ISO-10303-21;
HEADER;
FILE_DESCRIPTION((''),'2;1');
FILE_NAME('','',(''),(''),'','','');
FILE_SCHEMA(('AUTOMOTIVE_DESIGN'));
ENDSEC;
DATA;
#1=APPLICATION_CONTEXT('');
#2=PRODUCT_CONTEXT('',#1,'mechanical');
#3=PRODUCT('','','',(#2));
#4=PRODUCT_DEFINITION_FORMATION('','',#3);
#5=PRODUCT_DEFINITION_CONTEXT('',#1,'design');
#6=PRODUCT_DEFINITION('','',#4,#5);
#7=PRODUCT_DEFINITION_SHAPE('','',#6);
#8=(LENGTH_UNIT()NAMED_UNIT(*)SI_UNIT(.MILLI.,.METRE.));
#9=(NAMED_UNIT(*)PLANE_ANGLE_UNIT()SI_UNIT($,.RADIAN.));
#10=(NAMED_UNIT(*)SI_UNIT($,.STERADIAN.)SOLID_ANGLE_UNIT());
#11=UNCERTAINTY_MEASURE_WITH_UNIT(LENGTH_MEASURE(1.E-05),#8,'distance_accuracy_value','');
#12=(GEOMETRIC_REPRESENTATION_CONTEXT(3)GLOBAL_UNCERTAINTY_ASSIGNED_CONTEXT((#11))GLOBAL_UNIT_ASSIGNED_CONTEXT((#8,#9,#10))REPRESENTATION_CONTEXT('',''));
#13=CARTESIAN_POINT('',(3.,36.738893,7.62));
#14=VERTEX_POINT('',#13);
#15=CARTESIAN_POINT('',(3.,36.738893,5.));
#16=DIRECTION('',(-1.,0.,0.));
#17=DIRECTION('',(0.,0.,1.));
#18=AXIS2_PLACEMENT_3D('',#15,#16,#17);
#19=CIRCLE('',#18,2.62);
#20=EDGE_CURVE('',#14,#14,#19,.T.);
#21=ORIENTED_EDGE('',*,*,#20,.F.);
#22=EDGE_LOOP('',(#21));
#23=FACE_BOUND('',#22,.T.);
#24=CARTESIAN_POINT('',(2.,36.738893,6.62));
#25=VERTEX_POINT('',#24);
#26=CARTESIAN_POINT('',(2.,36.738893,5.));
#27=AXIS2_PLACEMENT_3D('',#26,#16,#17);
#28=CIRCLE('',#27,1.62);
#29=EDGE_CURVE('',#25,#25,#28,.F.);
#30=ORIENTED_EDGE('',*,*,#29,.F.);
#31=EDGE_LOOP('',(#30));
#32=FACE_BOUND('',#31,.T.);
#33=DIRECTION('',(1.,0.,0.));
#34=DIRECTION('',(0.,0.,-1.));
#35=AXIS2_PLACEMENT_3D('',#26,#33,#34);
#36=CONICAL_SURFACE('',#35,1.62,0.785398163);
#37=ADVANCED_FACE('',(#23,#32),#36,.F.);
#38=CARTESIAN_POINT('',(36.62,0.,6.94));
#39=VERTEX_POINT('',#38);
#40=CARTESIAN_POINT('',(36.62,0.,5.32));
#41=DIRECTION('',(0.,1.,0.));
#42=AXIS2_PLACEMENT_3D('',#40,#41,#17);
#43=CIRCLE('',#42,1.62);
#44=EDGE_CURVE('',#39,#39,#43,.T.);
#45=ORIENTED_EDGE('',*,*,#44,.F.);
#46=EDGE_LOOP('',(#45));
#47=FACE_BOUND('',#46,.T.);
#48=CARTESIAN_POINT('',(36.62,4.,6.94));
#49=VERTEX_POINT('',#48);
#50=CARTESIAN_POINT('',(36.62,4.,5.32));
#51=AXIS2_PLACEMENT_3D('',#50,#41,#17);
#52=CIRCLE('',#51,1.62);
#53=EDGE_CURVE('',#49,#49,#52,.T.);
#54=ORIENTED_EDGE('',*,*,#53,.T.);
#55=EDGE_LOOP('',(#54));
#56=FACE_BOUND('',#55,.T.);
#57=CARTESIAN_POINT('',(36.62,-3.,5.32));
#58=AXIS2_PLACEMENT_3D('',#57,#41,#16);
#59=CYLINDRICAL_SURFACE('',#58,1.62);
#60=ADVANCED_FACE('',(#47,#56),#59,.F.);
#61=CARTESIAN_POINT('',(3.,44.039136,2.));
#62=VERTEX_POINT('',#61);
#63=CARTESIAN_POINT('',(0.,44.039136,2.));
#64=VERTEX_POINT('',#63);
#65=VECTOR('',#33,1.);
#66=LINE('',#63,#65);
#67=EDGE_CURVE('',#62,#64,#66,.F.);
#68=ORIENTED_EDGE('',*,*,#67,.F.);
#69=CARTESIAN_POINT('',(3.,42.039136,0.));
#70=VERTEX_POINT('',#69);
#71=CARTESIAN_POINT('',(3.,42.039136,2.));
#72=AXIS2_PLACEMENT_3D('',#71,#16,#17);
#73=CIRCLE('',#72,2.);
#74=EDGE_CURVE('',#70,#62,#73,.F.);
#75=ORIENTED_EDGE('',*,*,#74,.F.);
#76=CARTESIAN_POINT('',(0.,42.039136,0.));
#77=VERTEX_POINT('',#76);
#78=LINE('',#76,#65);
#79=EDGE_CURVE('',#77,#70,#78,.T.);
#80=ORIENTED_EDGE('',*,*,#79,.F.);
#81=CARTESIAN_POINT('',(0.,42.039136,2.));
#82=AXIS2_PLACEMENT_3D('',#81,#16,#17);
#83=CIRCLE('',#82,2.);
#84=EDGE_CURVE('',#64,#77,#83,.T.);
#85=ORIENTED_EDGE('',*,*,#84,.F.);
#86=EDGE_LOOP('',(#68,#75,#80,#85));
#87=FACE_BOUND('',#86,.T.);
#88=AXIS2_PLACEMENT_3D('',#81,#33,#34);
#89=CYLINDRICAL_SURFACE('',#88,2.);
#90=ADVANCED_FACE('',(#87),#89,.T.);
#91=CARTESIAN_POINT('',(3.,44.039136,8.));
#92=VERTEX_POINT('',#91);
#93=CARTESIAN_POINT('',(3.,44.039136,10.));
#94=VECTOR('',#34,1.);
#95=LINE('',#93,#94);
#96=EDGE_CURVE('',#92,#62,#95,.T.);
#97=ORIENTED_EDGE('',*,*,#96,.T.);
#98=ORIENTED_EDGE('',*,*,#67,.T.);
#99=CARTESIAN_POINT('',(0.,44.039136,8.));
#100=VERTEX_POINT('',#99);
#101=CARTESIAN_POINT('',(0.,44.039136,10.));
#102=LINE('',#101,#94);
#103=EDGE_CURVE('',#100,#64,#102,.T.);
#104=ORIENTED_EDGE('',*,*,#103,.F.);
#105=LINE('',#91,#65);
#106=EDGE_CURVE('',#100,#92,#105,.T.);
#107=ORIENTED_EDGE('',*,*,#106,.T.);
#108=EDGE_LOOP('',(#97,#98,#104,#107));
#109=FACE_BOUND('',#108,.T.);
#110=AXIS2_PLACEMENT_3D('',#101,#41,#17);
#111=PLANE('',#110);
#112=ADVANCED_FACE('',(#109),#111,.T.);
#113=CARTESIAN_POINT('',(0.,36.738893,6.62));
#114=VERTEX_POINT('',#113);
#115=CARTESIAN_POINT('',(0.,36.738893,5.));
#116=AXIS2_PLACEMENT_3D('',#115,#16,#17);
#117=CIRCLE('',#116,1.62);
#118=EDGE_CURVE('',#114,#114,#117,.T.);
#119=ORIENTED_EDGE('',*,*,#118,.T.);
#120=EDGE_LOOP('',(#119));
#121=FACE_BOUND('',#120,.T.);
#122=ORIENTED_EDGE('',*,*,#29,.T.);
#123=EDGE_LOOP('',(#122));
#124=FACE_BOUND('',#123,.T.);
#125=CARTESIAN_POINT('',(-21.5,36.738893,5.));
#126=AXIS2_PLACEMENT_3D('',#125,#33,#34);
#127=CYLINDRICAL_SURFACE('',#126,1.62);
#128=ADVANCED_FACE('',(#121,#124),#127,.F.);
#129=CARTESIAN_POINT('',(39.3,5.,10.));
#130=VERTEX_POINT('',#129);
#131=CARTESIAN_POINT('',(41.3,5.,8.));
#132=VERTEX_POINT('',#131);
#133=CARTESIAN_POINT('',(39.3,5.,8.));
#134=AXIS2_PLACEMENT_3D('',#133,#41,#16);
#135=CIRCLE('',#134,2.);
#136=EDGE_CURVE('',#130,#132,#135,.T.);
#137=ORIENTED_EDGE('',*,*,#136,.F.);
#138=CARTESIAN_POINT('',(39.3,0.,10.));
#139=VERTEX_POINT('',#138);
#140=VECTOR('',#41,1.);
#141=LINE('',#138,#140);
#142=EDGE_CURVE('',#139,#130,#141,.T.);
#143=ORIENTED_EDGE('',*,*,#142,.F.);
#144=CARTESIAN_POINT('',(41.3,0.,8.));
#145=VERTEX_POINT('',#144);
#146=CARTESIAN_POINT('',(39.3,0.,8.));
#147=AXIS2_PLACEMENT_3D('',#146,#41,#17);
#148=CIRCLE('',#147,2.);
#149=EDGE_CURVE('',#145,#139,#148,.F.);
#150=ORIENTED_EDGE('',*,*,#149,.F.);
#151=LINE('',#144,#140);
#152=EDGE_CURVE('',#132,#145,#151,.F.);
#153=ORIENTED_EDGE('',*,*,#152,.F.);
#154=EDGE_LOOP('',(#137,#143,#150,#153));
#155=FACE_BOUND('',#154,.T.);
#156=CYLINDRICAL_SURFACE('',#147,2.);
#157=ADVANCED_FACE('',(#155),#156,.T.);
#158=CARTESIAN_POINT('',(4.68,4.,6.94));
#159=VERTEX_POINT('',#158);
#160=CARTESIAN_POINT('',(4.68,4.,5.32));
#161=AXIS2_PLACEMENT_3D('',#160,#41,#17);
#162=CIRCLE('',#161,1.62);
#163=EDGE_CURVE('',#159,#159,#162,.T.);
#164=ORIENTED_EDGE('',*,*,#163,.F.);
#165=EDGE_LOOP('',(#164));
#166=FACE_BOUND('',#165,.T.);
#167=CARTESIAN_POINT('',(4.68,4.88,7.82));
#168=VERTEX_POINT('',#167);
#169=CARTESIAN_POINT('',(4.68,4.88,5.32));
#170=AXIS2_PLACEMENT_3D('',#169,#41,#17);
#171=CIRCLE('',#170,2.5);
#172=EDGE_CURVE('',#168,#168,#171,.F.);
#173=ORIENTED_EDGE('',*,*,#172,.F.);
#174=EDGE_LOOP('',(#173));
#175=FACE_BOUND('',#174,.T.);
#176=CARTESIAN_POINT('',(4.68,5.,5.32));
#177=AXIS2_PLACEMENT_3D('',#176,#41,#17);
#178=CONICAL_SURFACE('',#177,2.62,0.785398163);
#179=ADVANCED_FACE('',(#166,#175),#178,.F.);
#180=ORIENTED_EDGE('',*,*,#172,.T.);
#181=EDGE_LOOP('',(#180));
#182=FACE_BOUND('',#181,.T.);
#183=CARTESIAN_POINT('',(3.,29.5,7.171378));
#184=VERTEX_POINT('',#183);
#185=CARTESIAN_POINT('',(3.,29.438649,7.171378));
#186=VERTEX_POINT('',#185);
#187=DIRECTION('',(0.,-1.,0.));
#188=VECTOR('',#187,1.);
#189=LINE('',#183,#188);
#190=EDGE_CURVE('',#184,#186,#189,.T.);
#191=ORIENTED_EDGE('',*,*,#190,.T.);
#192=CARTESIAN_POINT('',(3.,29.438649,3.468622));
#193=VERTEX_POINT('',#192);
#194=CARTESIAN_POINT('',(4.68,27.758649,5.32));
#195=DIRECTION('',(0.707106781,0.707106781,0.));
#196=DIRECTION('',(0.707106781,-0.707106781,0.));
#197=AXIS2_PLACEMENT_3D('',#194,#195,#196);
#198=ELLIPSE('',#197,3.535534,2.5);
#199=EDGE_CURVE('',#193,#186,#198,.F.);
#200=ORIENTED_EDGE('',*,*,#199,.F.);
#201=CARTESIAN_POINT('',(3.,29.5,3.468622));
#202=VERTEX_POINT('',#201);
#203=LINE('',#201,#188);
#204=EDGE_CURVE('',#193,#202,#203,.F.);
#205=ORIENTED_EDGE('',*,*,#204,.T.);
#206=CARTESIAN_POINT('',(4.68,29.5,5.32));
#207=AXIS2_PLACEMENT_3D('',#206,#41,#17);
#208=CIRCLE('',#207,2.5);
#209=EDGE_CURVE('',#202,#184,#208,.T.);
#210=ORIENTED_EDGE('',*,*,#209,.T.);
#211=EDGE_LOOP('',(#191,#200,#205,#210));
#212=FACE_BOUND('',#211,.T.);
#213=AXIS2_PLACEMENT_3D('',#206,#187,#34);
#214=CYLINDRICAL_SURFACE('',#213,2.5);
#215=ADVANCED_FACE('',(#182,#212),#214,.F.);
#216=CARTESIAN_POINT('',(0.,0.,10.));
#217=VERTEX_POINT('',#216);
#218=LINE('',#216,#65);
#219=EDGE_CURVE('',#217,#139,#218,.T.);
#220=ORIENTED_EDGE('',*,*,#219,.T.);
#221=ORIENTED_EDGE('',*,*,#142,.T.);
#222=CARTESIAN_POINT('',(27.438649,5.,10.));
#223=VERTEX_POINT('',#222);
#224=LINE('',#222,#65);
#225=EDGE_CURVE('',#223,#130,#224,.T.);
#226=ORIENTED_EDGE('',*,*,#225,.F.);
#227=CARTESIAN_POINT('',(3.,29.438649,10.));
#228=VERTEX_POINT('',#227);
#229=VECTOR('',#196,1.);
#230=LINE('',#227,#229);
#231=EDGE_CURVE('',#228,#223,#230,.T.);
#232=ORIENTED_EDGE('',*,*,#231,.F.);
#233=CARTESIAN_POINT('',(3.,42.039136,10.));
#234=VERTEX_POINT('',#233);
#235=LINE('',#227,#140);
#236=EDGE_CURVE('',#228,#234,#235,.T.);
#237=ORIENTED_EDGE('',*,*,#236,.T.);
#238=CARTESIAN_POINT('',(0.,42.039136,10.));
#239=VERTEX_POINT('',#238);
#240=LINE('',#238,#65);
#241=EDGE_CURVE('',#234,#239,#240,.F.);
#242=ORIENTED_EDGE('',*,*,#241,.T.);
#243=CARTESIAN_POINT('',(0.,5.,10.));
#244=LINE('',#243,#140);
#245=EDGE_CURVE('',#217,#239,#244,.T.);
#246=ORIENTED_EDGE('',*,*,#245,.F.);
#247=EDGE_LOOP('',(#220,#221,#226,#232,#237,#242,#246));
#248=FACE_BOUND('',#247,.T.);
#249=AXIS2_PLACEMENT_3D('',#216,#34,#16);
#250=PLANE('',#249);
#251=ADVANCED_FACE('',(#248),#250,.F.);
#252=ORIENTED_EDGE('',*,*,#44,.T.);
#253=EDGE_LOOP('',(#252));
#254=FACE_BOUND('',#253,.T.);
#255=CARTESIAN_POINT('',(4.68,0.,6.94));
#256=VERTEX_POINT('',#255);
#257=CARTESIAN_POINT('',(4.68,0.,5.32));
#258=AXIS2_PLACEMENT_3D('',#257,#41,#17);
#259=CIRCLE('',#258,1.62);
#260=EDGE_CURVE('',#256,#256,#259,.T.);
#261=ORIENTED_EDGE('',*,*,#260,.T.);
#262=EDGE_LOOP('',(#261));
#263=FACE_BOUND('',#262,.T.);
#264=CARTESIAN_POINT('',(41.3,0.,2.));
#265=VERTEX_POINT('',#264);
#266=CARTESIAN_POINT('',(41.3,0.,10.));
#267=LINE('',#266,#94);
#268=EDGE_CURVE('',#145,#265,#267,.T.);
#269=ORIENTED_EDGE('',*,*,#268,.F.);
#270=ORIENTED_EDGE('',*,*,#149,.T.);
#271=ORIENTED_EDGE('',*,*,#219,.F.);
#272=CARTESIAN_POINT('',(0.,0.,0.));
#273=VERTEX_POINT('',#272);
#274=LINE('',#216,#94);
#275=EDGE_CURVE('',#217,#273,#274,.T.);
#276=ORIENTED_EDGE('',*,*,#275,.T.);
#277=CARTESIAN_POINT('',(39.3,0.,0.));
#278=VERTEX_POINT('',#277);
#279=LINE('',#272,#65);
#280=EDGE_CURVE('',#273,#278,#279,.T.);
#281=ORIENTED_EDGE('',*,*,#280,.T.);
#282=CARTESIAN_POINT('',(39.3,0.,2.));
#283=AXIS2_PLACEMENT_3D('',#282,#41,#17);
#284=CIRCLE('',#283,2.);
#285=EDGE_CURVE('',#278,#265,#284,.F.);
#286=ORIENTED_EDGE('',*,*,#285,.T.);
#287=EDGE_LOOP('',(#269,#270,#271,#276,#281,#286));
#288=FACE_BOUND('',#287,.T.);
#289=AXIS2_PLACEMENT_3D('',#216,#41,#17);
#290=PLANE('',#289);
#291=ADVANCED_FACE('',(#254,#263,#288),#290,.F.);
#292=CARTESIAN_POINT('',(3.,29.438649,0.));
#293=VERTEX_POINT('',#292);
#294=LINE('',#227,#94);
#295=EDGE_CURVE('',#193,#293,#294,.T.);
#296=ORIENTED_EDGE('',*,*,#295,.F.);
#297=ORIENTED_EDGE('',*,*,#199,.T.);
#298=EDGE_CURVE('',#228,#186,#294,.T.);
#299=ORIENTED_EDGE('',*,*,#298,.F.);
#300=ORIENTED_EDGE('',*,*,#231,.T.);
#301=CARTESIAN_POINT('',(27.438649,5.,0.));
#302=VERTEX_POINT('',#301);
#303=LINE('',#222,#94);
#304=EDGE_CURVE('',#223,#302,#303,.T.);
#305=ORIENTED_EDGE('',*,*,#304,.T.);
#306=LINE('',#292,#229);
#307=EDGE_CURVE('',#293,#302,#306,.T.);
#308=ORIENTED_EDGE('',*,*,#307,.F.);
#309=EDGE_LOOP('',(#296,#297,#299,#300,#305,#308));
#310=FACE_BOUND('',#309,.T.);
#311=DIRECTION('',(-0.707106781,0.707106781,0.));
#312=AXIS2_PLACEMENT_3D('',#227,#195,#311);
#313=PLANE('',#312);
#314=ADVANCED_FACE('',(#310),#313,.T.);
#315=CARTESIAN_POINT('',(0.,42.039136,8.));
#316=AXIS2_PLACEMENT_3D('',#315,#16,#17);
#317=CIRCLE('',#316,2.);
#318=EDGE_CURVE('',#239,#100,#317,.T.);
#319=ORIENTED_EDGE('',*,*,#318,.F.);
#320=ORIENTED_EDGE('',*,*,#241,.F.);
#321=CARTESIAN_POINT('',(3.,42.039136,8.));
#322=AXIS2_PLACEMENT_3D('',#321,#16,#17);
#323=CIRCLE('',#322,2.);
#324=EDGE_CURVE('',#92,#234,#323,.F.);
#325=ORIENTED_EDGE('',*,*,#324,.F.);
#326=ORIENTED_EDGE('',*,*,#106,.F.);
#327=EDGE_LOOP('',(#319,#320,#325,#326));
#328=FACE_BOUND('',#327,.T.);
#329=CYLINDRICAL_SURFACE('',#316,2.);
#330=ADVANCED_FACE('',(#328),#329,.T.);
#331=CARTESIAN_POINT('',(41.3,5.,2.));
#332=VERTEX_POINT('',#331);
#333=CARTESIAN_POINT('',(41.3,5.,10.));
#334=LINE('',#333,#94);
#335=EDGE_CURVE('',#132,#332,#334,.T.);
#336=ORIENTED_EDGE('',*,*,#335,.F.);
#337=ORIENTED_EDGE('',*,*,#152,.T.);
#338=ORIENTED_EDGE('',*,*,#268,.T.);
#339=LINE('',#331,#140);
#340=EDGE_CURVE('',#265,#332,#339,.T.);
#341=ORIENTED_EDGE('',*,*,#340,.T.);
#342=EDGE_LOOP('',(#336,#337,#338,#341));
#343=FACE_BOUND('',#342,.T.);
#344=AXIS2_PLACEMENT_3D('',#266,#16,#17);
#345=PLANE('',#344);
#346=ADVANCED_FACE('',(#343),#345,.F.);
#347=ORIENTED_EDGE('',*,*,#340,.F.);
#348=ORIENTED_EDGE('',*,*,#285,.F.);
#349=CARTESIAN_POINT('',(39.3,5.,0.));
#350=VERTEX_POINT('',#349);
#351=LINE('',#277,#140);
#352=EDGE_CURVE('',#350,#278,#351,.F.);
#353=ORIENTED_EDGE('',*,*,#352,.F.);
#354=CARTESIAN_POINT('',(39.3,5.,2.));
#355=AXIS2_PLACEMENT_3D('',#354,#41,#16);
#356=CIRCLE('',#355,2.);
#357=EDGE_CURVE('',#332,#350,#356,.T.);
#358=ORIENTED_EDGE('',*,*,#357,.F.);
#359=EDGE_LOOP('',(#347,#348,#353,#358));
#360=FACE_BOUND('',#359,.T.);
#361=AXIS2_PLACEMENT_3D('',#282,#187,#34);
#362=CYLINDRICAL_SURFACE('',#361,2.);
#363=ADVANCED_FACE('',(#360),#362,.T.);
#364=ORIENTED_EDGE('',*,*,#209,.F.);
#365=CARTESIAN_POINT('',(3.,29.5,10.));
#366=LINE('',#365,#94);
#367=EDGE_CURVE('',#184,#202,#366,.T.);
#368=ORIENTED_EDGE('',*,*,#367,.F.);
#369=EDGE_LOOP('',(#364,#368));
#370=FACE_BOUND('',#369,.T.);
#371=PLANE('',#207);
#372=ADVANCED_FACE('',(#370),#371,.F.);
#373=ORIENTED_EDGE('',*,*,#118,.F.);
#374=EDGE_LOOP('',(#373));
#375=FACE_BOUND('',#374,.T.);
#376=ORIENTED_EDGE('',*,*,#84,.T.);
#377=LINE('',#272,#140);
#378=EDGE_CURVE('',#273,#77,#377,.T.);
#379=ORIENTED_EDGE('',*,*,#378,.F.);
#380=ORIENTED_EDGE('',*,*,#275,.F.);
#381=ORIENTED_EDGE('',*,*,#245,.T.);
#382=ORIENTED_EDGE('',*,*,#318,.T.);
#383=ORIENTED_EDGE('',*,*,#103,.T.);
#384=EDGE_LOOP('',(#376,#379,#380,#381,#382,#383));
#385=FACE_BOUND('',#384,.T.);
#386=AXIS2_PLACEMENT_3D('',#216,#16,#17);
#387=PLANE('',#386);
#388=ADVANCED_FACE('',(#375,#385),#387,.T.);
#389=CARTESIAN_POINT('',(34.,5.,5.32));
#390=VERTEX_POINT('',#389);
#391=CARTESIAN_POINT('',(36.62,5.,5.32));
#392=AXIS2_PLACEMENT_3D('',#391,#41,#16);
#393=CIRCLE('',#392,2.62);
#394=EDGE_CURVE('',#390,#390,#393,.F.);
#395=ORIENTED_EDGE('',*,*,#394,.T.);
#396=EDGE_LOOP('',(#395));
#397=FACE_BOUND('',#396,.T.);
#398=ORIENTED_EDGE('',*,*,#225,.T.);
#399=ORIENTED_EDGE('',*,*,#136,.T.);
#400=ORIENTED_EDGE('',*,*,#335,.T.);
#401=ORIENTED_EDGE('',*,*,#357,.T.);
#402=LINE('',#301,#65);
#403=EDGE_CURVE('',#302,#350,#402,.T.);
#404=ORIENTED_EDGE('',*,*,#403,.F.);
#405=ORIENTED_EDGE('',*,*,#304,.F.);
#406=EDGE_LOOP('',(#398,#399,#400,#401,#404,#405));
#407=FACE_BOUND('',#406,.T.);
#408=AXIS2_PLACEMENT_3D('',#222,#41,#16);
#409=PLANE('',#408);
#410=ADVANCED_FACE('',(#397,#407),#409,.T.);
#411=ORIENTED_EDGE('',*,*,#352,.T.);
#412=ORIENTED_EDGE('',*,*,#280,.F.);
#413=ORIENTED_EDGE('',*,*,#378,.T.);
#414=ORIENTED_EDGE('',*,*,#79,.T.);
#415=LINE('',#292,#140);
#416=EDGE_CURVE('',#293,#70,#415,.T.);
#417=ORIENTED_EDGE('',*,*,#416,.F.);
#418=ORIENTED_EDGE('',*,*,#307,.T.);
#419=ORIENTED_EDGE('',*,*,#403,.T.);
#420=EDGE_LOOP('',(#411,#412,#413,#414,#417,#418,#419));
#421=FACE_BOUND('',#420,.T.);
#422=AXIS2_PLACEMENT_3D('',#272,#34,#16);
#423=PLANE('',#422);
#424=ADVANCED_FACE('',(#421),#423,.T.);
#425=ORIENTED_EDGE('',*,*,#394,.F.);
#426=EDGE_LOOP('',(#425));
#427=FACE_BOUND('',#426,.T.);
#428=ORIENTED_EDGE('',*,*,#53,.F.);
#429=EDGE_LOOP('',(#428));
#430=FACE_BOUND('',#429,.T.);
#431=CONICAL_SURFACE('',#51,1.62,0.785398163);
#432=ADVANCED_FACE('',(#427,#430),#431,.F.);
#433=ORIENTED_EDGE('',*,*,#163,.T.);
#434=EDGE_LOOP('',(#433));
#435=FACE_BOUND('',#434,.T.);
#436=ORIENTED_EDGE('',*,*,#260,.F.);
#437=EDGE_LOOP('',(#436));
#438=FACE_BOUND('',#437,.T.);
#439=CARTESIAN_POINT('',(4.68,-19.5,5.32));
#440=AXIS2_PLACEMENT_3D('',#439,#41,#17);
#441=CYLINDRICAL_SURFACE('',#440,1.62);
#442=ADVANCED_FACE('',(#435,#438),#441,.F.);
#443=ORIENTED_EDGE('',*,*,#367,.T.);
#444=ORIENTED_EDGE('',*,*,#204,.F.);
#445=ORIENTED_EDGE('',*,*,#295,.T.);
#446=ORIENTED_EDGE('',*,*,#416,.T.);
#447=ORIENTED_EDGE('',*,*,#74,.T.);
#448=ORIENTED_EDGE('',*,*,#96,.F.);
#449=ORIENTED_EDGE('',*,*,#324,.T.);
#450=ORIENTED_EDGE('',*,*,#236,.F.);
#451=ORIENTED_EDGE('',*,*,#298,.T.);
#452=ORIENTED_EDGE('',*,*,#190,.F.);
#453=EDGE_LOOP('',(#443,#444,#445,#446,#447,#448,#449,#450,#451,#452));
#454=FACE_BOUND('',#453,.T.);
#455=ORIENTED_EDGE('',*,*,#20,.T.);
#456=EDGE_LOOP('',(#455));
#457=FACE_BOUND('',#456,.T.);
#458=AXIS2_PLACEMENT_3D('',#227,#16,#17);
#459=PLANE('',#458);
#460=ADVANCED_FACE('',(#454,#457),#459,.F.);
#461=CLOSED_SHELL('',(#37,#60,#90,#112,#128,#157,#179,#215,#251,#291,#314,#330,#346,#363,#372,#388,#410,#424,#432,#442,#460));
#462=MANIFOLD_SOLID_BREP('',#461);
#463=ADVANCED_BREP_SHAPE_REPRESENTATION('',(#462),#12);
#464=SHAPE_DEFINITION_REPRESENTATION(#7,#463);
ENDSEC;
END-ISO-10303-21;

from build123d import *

# Parameters (mm, degrees)
ESTRUSIONE_ESTRUSIONE1_DEPTH = 10
SCHIZZO3_R                   = 1.62
TAGLIO_ESTRUSIONE1_DEPTH     = 8
SCHIZZO5_R                   = 1.62
TAGLIO_ESTRUSIONE4_DEPTH     = 24.5
SCHIZZO5_4_R                 = 2.5
TAGLIO_ESTRUSIONE5_DEPTH     = 24.5
SMUSSO4_SIZE                 = 1
SMUSSO5_SIZE                 = 1
SCHIZZO6_R                   = 1.62
TAGLIO_ESTRUSIONE6_DEPTH     = 24.5
SMUSSO6_SIZE                 = 1
RACCORDO1_R                  = 2


with BuildPart() as part:
    # Schizzo2 → Estrusione-Estrusione1 (new body)
    with BuildSketch(Plane.XY):
        Polygon((3, 29.438649361), (27.438649361, 5), (41.3, 5), (41.3, 0), (0, 0), (0, 5), (0, 44.039135738), (3, 44.039135738), align=None)
    extrude(amount=ESTRUSIONE_ESTRUSIONE1_DEPTH)

    # Schizzo3 → Taglio-Estrusione1 (cut)
    with BuildSketch(Plane(origin=(0, 5, 0), x_dir=(1, 0, 0), z_dir=(0, 1, 0))):
        with Locations(Location((36.62, -5.32, 0), (0, 0, 180))):
            Circle(SCHIZZO3_R)
    extrude(amount=-TAGLIO_ESTRUSIONE1_DEPTH, mode=Mode.SUBTRACT)

    # Schizzo5 → Taglio-Estrusione4 (cut)
    with BuildSketch(Plane(origin=(0, 5, 0), x_dir=(1, 0, 0), z_dir=(0, 1, 0))):
        with Locations(Location((4.68, -5.32, 0), (0, 0, 270))):
            Circle(SCHIZZO5_R)
    extrude(amount=-TAGLIO_ESTRUSIONE4_DEPTH, mode=Mode.SUBTRACT)

    # Schizzo5<4> → Taglio-Estrusione5 (cut)
    with BuildSketch(Plane(origin=(0, 5, 0), x_dir=(1, 0, 0), z_dir=(0, 1, 0))):
        with Locations(Location((4.68, -5.32, 0), (0, 0, 132.221614055))):
            Circle(SCHIZZO5_4_R)
    extrude(amount=TAGLIO_ESTRUSIONE5_DEPTH, mode=Mode.SUBTRACT)

    # Smusso4
    # the kernel refuses this chamfer: 1 mm, written as the material it takes off along each edge
    with BuildSketch(Plane(origin=(4.68, 5, 5.32), x_dir=(0, 0, 1), z_dir=(-1, 0, 0))) as smusso4_piece_1_section:
        Polygon((1.62 + SMUSSO4_SIZE, 0), (1.62, -SMUSSO4_SIZE), (1.62, 0), align=None)
    smusso4_piece_1 = revolve(axis=Axis((4.68, 5, 5.32), (0, 1, 0)), mode=Mode.PRIVATE)
    smusso4_piece_1 = smusso4_piece_1 & Plane(origin=(4.68, 4.439074745, 5.32), x_dir=(-0.6719999999981088, 0, -0.740551146108452), z_dir=(0, -1, 0)) * Cylinder(2.5, 11, mode=Mode.PRIVATE)
    add(smusso4_piece_1, mode=Mode.SUBTRACT)

    # Smusso5
    smusso5_edges = [part.edges().sort_by_distance(p)[0] for p in [
        (38.24, 5, 5.32),
    ]]
    chamfer(smusso5_edges, length=SMUSSO5_SIZE)

    # Schizzo6 → Taglio-Estrusione6 (cut)
    with BuildSketch(Plane(origin=(3, 0, 0), x_dir=(0, 0, -1), z_dir=(1, 0, 0))):
        with Locations((-5, 36.73889255)):
            Circle(SCHIZZO6_R)
    extrude(amount=-TAGLIO_ESTRUSIONE6_DEPTH, mode=Mode.SUBTRACT)

    # Smusso6
    smusso6_edges = [part.edges().sort_by_distance(p)[0] for p in [
        (3, 36.73889255, 6.62),
    ]]
    chamfer(smusso6_edges, length=SMUSSO6_SIZE)

    # Raccordo1
    raccordo1_edges = [part.edges().sort_by_distance(p)[0] for p in [
        (1.5, 44.039135738, 0),
        (41.3, 2.5, 10),
        (1.5, 44.039135738, 10),
        (41.3, 2.5, 0),
    ]]
    fillet(raccordo1_edges, radius=RACCORDO1_R)


solid = part.part
